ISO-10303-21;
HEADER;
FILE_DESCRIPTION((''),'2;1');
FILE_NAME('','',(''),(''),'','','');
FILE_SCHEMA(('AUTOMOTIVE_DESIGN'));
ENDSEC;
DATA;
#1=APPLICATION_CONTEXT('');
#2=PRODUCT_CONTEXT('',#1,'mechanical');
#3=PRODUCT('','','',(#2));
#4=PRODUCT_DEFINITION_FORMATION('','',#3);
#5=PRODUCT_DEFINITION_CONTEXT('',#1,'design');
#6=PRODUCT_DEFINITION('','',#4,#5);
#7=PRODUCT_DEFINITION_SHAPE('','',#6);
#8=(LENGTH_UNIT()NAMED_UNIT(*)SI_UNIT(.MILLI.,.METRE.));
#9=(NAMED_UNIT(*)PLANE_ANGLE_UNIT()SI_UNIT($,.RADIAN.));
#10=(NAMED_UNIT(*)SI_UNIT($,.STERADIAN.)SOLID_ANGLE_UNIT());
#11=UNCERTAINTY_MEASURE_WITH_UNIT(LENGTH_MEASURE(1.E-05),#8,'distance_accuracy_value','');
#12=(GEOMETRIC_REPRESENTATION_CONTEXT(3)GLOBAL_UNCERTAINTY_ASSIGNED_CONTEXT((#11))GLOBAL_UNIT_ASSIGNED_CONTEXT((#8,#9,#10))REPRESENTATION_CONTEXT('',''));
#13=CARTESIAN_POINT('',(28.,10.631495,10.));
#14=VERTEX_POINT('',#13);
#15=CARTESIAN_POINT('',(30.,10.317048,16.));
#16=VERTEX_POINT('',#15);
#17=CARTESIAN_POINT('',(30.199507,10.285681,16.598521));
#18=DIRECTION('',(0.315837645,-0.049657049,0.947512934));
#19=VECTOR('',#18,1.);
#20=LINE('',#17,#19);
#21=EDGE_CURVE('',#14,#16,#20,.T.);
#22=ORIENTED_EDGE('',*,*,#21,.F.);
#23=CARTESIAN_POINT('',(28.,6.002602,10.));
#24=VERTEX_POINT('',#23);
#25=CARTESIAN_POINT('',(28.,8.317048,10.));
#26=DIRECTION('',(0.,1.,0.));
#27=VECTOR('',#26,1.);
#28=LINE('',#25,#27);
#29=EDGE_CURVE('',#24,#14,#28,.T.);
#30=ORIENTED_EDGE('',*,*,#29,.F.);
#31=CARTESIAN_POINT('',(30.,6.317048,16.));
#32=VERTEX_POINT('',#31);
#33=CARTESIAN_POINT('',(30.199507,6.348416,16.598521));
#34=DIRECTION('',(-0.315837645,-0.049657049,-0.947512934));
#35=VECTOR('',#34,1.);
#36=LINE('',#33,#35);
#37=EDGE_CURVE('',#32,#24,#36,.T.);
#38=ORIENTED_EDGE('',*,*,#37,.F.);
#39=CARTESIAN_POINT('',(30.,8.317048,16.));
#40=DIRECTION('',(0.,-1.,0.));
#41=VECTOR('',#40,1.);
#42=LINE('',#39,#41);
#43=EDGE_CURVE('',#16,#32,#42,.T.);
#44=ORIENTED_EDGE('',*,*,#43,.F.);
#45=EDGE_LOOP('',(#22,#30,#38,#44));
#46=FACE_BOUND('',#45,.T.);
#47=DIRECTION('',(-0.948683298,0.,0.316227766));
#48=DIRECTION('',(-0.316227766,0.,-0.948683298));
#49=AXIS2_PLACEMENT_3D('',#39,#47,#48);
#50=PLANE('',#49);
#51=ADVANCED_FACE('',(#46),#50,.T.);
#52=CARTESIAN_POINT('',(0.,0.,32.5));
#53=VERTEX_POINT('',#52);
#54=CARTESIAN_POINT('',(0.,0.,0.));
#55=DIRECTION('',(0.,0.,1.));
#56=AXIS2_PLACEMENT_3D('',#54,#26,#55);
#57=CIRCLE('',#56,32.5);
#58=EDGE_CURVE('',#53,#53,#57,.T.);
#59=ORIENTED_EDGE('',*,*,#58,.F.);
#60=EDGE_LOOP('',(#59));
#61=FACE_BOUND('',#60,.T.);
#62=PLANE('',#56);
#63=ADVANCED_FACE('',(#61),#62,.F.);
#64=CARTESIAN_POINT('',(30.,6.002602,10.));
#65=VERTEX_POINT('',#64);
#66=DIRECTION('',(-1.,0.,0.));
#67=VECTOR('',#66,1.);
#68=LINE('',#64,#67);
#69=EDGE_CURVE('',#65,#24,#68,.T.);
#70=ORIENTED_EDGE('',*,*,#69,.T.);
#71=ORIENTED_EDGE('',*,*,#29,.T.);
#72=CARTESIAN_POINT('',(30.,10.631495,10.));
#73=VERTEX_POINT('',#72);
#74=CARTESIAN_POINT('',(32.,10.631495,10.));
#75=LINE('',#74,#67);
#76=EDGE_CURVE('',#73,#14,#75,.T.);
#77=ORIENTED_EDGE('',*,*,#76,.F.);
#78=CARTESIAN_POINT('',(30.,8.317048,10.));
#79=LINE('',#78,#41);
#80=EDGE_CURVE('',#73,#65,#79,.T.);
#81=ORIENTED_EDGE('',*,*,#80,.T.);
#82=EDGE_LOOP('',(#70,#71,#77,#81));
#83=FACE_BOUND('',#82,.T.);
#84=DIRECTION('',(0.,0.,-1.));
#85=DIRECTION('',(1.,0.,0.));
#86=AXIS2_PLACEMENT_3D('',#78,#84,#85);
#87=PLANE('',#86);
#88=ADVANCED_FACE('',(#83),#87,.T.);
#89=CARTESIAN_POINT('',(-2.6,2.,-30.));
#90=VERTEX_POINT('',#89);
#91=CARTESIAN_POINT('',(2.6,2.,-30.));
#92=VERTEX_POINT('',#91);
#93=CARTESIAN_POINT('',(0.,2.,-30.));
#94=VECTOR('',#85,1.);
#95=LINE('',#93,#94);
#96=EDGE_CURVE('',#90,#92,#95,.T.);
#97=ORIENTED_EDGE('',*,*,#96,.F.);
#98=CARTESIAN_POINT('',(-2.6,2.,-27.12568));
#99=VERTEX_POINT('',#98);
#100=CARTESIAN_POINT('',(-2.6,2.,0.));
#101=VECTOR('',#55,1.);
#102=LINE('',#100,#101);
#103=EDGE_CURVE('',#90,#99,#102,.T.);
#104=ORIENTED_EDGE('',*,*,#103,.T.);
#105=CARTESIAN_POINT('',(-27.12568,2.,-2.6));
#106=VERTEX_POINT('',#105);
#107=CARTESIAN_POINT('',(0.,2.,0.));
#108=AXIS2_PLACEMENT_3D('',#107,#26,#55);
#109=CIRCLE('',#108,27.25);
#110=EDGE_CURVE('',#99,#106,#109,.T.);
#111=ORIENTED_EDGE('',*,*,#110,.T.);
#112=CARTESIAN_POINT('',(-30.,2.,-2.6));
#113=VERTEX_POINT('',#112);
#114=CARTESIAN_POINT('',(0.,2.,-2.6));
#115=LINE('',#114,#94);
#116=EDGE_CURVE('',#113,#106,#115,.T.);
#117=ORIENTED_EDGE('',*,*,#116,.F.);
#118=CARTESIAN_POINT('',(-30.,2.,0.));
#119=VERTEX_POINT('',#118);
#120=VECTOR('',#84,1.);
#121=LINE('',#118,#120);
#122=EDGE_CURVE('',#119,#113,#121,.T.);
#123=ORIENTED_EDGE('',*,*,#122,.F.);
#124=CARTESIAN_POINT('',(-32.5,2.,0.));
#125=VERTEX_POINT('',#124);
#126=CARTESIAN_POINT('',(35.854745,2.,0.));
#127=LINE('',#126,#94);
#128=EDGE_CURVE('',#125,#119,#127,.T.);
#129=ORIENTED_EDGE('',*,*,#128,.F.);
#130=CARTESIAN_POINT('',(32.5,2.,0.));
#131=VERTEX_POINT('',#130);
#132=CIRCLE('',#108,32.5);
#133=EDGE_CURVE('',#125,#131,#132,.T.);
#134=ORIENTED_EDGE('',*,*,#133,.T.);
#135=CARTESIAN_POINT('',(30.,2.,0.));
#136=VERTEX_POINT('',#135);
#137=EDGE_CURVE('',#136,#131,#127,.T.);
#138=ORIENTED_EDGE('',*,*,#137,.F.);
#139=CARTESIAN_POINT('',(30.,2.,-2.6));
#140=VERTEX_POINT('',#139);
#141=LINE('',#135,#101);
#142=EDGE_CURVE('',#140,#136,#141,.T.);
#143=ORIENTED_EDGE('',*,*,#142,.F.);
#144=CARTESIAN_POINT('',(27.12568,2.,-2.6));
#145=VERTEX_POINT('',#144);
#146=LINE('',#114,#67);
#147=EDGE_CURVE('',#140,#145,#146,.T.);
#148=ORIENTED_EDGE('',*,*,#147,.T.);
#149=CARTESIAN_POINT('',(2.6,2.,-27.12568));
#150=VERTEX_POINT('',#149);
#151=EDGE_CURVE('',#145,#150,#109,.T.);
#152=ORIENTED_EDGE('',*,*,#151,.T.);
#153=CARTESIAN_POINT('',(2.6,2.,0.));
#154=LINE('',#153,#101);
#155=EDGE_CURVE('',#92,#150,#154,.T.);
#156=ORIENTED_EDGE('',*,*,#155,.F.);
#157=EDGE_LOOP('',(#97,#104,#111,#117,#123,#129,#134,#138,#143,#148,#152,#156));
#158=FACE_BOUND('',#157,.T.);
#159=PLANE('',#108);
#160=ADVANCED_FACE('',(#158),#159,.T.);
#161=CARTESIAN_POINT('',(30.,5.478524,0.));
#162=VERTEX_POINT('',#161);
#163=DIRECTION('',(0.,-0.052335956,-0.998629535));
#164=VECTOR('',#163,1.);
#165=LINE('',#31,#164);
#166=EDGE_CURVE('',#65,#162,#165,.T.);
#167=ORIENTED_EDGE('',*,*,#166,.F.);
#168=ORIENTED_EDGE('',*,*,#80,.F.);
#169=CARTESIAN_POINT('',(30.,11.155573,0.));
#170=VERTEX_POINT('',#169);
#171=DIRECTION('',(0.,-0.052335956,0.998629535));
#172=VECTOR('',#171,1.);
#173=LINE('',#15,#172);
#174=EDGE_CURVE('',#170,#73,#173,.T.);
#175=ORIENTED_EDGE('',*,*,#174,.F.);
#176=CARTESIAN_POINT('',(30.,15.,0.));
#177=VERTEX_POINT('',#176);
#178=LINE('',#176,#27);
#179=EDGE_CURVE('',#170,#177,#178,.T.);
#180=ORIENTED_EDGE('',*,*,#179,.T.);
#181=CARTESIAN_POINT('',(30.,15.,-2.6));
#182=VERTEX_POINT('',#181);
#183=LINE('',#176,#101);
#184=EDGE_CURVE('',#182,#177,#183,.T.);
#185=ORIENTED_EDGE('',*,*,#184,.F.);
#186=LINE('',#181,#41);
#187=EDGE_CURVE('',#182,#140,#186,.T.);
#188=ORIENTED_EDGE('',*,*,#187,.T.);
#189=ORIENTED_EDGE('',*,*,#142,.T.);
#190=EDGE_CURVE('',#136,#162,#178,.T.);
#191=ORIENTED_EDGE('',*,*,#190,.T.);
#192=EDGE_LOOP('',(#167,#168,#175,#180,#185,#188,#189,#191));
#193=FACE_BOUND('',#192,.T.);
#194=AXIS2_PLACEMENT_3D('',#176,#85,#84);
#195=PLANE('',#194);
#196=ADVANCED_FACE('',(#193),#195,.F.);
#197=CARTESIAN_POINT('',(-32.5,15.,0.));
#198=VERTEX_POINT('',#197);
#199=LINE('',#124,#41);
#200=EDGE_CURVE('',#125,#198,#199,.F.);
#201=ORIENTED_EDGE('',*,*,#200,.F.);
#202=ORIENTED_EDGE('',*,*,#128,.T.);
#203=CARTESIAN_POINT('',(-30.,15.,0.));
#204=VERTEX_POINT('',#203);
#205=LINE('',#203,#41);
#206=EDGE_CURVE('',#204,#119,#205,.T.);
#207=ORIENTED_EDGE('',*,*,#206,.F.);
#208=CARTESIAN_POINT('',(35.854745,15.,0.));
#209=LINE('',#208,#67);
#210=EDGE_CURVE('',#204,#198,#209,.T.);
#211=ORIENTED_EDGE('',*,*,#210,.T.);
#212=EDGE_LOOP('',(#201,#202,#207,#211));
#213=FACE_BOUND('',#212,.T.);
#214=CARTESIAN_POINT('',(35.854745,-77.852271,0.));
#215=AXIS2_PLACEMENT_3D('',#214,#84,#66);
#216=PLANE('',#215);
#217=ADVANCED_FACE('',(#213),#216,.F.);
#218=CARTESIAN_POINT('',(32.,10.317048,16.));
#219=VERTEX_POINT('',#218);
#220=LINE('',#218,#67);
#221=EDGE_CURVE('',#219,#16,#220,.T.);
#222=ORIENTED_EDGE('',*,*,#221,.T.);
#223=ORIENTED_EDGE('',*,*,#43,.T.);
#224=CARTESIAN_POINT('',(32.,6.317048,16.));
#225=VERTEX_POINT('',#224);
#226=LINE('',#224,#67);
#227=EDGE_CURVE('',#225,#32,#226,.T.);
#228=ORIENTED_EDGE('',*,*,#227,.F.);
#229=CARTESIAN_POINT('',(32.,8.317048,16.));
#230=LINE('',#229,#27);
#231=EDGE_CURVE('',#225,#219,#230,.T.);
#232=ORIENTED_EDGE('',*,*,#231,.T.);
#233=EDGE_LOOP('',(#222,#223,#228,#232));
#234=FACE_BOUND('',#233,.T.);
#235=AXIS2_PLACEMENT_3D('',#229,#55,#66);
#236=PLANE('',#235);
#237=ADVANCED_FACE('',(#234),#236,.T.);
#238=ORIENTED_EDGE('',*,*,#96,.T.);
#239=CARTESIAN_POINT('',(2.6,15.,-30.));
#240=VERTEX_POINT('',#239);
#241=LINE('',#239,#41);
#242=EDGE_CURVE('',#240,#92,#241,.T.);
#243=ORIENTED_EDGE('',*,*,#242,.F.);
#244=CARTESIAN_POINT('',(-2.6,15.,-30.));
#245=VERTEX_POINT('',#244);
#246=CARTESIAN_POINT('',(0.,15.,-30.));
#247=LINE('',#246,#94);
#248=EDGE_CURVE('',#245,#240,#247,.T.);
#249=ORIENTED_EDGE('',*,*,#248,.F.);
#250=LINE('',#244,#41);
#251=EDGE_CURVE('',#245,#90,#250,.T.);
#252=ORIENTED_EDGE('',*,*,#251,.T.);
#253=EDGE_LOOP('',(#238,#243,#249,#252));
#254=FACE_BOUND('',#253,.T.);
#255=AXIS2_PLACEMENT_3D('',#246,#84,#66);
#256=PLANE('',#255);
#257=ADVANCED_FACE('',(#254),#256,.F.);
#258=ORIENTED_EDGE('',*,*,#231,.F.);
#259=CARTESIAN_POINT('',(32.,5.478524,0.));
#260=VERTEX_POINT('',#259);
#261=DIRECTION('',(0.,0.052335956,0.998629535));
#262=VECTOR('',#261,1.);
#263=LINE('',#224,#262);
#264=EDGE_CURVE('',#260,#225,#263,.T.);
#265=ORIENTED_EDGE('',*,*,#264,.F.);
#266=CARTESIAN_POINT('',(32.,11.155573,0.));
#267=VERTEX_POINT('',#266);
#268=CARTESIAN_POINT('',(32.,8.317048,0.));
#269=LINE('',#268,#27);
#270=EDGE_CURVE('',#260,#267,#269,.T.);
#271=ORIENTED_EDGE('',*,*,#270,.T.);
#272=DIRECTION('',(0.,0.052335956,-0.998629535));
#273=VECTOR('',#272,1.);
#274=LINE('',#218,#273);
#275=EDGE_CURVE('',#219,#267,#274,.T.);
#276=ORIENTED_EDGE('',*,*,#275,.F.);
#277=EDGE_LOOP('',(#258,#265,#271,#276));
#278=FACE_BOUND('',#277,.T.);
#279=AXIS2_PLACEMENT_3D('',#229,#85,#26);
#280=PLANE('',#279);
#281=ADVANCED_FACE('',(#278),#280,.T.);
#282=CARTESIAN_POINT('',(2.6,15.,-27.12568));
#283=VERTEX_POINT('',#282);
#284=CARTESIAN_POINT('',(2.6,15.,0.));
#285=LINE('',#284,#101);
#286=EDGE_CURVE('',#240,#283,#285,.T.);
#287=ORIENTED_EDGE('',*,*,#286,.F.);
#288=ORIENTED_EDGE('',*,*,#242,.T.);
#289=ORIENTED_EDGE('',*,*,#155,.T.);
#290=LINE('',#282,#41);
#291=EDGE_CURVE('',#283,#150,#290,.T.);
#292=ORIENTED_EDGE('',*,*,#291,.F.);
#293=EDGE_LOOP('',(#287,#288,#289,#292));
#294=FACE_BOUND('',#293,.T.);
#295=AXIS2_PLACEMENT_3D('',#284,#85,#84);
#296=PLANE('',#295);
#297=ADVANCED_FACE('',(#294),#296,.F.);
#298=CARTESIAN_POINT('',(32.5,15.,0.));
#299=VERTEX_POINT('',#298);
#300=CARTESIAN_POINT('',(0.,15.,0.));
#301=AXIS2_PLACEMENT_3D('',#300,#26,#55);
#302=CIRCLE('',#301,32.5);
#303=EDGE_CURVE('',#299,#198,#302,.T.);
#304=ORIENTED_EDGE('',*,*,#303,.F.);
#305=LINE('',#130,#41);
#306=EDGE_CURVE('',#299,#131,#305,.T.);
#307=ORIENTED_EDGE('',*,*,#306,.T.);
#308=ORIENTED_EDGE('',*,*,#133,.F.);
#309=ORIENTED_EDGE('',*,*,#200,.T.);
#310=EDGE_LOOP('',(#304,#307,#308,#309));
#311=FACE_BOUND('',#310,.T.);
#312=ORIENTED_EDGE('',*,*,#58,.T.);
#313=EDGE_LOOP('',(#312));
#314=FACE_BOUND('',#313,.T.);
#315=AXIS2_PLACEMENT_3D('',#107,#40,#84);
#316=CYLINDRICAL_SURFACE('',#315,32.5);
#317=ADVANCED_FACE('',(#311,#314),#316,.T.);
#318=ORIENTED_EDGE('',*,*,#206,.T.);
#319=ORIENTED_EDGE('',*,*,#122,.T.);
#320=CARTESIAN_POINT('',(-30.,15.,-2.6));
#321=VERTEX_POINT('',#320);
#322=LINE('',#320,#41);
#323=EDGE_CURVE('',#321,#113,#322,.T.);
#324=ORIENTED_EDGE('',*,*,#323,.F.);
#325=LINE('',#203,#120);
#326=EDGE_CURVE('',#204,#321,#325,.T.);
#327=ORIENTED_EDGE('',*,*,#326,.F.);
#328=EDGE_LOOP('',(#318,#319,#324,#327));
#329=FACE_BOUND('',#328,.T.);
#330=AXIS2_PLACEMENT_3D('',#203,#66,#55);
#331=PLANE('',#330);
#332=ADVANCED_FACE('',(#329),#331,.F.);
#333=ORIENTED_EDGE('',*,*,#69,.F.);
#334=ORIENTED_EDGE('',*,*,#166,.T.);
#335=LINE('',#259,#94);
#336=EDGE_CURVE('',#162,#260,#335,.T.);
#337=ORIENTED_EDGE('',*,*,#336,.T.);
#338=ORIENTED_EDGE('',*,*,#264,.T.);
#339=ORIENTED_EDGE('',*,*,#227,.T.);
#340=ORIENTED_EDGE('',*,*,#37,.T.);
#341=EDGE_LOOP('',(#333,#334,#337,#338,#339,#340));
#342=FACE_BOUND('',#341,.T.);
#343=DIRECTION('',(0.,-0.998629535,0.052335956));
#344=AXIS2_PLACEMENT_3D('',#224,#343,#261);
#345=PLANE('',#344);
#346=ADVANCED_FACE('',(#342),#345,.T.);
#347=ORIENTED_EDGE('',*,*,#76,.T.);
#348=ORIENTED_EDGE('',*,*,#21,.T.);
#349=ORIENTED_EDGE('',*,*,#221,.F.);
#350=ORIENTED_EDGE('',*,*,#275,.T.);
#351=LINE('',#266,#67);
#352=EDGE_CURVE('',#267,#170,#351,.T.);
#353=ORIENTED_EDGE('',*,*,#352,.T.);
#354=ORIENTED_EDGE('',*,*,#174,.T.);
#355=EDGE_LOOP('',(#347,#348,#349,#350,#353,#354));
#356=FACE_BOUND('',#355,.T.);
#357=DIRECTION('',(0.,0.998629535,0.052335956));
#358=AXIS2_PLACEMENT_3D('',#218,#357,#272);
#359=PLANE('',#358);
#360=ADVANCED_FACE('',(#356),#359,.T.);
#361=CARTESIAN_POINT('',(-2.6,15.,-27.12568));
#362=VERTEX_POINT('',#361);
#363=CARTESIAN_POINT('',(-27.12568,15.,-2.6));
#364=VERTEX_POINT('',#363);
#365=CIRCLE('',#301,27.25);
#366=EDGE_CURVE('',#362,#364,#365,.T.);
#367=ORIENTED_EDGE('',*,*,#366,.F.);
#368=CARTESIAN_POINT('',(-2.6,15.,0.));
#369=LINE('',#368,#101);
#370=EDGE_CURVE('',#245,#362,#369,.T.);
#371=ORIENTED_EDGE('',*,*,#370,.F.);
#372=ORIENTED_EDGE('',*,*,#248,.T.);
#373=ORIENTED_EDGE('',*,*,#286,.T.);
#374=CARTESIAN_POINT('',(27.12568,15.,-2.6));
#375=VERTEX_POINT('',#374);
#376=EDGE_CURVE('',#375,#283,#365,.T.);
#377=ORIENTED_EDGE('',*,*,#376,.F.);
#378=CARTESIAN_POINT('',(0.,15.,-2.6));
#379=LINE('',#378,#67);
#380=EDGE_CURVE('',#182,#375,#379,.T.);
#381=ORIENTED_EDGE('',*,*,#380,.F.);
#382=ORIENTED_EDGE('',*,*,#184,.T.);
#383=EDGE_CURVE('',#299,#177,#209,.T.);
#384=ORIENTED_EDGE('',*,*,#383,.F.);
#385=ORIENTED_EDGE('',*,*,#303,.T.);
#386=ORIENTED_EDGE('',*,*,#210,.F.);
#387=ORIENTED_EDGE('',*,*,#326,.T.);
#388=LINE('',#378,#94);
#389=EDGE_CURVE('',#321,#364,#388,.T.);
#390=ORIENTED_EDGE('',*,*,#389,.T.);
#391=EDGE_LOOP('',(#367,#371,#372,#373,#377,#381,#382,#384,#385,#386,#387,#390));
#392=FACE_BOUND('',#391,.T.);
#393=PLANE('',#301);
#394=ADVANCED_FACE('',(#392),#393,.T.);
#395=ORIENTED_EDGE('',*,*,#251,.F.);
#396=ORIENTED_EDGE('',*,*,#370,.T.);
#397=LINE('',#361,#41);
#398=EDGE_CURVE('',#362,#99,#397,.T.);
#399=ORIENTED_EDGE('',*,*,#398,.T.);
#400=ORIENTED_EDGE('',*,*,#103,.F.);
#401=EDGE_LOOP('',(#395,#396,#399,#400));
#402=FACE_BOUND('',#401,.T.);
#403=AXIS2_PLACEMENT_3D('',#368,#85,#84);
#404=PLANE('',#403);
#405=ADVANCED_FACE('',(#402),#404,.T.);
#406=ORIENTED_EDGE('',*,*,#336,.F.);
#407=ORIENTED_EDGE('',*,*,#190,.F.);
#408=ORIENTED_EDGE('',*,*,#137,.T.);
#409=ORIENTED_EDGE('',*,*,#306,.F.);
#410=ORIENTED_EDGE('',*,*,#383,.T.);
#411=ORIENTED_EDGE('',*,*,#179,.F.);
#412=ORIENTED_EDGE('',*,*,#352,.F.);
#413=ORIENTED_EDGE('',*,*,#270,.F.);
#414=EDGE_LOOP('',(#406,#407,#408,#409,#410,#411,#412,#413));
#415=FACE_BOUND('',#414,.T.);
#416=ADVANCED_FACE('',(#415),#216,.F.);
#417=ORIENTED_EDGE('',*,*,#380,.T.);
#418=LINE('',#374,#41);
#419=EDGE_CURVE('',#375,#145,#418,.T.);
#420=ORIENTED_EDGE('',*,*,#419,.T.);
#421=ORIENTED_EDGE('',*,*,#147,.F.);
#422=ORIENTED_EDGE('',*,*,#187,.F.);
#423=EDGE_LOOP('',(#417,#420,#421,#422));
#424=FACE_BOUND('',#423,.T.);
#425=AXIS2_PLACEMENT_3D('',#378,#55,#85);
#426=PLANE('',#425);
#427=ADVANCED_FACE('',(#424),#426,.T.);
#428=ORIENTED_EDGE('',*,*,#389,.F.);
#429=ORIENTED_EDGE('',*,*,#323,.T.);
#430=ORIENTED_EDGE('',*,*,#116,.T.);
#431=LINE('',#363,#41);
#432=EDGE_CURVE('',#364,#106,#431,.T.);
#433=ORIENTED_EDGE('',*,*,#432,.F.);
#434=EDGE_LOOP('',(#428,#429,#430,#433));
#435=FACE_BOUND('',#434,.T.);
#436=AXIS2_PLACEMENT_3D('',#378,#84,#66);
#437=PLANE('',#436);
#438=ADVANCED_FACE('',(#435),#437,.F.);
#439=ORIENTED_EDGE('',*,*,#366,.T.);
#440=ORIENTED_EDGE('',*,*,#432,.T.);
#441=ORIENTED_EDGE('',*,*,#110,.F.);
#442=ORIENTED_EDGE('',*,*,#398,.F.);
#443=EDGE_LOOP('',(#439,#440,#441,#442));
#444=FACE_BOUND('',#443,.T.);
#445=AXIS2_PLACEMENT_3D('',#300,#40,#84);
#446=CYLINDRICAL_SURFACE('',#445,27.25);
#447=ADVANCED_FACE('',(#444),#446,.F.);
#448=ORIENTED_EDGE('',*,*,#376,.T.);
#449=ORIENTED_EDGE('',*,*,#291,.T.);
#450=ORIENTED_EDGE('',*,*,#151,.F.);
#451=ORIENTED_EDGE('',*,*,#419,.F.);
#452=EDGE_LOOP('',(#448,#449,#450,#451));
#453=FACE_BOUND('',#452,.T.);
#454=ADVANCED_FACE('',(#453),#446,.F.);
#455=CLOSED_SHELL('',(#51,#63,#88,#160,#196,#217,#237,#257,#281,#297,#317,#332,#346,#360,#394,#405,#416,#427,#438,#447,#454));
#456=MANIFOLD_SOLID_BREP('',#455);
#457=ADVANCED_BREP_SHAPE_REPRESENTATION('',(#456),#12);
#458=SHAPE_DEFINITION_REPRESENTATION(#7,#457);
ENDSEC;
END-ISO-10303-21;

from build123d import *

# Parameters (mm, degrees)
SKETCH1_R           = 32.5
BOSS_EXTRUDE1_DEPTH = 2
SKETCH2_R           = 32.5
BOSS_EXTRUDE2_DEPTH = 13
SKETCH6_W           = 71.390071862
SKETCH6_H           = 35.774890597
CUT_EXTRUDE4_DEPTH  = 13
SNAP_START          = 30
SNAP_HOOK1_DEPTH    = 2
SNAP_START_2        = 6.002601726
SNAP_HOOK1_2_DEPTH  = 4.628893351
SNAP_START_3        = 27
SNAP_HOOK1_3_DEPTH  = 3


with BuildPart() as part:
    # Sketch1 → Boss-Extrude1 (new body)
    with BuildSketch(Plane(origin=(0, 0, 0), x_dir=(1, 0, 0), z_dir=(0, 1, 0))):
        with Locations(Location((0, 0, 0), (0, 0, 270))):
            Circle(SKETCH1_R)
    extrude(amount=BOSS_EXTRUDE1_DEPTH)

    # Sketch2 → Boss-Extrude2 (add)
    with BuildSketch(Plane(origin=(0, 2, 0), x_dir=(1, 0, 0), z_dir=(0, 1, 0))):
        with Locations(Location((0, 0, 0), (0, 0, 270))):
            Circle(SKETCH2_R)
        with BuildLine():
            Line((2.6, -27.125679715), (2.6, -30))
            Line((2.6, -30), (-2.6, -30))
            Line((-2.6, -30), (-2.6, -27.125679715))
            ThreePointArc((-2.6, -27.125679715), (-19.268659787, -19.268659787), (-27.125679715, -2.6))
            Line((-27.125679715, -2.6), (-30, -2.6))
            Line((-30, -2.6), (-30, 2.6))
            Line((-30, 2.6), (-27.125679715, 2.6))
            ThreePointArc((-27.125679715, 2.6), (-19.268659787, 19.268659787), (-2.6, 27.125679715))
            Line((-2.6, 27.125679715), (-2.6, 30))
            Line((-2.6, 30), (2.6, 30))
            Line((2.6, 30), (2.6, 27.125679715))
            ThreePointArc((2.6, 27.125679715), (19.268659787, 19.268659787), (27.125679715, 2.6))
            Line((27.125679715, 2.6), (30, 2.6))
            Line((30, 2.6), (30, -2.6))
            Line((30, -2.6), (27.125679715, -2.6))
            ThreePointArc((27.125679715, -2.6), (19.268659787, -19.268659787), (2.6, -27.125679715))
        make_face(mode=Mode.SUBTRACT)
    extrude(amount=BOSS_EXTRUDE2_DEPTH)

    # Sketch6 → Cut-Extrude4 (cut)
    with BuildSketch(Plane(origin=(0, 15, 0), x_dir=(1, 0, 0), z_dir=(0, 1, 0))):
        with Locations((0.159709333, -17.887445299)):
            Rectangle(SKETCH6_W, SKETCH6_H)
    extrude(amount=-CUT_EXTRUDE4_DEPTH, mode=Mode.SUBTRACT)

    # Snap Hook1: read off the stored shape, not the designer's step
    # Snap Hook1 outline → Snap Hook1 (add)
    with BuildSketch(Plane.YZ.offset(SNAP_START)):
        Polygon((6.317048401, 16), (5.478523933, 0), (11.15557287, 0), (10.317048401, 16), align=None)
    extrude(amount=SNAP_HOOK1_DEPTH)

    # Snap Hook1 2 outline → Snap Hook1 2 (add)
    with BuildSketch(Plane(origin=(0, 0, 0), x_dir=(1, 0, 0), z_dir=(0, 1, 0)).offset(SNAP_START_2)):
        Polygon((30, -16), (30, -10), (28, -10), align=None)
    extrude(amount=SNAP_HOOK1_2_DEPTH)

    # Snap Hook1 3 outline → Snap Hook1 3 (cut)
    with BuildSketch(Plane.YZ.offset(SNAP_START_3)):
        Polygon((6.002601726, 10), (6.317048401, 16), (6.36945618, 17), (6.002601726, 17), align=None)
        Polygon((10.631495077, 17), (10.264640622, 17), (10.317048401, 16), (10.631495077, 10), align=None)
    extrude(amount=SNAP_HOOK1_3_DEPTH, mode=Mode.SUBTRACT)


solid = part.part
